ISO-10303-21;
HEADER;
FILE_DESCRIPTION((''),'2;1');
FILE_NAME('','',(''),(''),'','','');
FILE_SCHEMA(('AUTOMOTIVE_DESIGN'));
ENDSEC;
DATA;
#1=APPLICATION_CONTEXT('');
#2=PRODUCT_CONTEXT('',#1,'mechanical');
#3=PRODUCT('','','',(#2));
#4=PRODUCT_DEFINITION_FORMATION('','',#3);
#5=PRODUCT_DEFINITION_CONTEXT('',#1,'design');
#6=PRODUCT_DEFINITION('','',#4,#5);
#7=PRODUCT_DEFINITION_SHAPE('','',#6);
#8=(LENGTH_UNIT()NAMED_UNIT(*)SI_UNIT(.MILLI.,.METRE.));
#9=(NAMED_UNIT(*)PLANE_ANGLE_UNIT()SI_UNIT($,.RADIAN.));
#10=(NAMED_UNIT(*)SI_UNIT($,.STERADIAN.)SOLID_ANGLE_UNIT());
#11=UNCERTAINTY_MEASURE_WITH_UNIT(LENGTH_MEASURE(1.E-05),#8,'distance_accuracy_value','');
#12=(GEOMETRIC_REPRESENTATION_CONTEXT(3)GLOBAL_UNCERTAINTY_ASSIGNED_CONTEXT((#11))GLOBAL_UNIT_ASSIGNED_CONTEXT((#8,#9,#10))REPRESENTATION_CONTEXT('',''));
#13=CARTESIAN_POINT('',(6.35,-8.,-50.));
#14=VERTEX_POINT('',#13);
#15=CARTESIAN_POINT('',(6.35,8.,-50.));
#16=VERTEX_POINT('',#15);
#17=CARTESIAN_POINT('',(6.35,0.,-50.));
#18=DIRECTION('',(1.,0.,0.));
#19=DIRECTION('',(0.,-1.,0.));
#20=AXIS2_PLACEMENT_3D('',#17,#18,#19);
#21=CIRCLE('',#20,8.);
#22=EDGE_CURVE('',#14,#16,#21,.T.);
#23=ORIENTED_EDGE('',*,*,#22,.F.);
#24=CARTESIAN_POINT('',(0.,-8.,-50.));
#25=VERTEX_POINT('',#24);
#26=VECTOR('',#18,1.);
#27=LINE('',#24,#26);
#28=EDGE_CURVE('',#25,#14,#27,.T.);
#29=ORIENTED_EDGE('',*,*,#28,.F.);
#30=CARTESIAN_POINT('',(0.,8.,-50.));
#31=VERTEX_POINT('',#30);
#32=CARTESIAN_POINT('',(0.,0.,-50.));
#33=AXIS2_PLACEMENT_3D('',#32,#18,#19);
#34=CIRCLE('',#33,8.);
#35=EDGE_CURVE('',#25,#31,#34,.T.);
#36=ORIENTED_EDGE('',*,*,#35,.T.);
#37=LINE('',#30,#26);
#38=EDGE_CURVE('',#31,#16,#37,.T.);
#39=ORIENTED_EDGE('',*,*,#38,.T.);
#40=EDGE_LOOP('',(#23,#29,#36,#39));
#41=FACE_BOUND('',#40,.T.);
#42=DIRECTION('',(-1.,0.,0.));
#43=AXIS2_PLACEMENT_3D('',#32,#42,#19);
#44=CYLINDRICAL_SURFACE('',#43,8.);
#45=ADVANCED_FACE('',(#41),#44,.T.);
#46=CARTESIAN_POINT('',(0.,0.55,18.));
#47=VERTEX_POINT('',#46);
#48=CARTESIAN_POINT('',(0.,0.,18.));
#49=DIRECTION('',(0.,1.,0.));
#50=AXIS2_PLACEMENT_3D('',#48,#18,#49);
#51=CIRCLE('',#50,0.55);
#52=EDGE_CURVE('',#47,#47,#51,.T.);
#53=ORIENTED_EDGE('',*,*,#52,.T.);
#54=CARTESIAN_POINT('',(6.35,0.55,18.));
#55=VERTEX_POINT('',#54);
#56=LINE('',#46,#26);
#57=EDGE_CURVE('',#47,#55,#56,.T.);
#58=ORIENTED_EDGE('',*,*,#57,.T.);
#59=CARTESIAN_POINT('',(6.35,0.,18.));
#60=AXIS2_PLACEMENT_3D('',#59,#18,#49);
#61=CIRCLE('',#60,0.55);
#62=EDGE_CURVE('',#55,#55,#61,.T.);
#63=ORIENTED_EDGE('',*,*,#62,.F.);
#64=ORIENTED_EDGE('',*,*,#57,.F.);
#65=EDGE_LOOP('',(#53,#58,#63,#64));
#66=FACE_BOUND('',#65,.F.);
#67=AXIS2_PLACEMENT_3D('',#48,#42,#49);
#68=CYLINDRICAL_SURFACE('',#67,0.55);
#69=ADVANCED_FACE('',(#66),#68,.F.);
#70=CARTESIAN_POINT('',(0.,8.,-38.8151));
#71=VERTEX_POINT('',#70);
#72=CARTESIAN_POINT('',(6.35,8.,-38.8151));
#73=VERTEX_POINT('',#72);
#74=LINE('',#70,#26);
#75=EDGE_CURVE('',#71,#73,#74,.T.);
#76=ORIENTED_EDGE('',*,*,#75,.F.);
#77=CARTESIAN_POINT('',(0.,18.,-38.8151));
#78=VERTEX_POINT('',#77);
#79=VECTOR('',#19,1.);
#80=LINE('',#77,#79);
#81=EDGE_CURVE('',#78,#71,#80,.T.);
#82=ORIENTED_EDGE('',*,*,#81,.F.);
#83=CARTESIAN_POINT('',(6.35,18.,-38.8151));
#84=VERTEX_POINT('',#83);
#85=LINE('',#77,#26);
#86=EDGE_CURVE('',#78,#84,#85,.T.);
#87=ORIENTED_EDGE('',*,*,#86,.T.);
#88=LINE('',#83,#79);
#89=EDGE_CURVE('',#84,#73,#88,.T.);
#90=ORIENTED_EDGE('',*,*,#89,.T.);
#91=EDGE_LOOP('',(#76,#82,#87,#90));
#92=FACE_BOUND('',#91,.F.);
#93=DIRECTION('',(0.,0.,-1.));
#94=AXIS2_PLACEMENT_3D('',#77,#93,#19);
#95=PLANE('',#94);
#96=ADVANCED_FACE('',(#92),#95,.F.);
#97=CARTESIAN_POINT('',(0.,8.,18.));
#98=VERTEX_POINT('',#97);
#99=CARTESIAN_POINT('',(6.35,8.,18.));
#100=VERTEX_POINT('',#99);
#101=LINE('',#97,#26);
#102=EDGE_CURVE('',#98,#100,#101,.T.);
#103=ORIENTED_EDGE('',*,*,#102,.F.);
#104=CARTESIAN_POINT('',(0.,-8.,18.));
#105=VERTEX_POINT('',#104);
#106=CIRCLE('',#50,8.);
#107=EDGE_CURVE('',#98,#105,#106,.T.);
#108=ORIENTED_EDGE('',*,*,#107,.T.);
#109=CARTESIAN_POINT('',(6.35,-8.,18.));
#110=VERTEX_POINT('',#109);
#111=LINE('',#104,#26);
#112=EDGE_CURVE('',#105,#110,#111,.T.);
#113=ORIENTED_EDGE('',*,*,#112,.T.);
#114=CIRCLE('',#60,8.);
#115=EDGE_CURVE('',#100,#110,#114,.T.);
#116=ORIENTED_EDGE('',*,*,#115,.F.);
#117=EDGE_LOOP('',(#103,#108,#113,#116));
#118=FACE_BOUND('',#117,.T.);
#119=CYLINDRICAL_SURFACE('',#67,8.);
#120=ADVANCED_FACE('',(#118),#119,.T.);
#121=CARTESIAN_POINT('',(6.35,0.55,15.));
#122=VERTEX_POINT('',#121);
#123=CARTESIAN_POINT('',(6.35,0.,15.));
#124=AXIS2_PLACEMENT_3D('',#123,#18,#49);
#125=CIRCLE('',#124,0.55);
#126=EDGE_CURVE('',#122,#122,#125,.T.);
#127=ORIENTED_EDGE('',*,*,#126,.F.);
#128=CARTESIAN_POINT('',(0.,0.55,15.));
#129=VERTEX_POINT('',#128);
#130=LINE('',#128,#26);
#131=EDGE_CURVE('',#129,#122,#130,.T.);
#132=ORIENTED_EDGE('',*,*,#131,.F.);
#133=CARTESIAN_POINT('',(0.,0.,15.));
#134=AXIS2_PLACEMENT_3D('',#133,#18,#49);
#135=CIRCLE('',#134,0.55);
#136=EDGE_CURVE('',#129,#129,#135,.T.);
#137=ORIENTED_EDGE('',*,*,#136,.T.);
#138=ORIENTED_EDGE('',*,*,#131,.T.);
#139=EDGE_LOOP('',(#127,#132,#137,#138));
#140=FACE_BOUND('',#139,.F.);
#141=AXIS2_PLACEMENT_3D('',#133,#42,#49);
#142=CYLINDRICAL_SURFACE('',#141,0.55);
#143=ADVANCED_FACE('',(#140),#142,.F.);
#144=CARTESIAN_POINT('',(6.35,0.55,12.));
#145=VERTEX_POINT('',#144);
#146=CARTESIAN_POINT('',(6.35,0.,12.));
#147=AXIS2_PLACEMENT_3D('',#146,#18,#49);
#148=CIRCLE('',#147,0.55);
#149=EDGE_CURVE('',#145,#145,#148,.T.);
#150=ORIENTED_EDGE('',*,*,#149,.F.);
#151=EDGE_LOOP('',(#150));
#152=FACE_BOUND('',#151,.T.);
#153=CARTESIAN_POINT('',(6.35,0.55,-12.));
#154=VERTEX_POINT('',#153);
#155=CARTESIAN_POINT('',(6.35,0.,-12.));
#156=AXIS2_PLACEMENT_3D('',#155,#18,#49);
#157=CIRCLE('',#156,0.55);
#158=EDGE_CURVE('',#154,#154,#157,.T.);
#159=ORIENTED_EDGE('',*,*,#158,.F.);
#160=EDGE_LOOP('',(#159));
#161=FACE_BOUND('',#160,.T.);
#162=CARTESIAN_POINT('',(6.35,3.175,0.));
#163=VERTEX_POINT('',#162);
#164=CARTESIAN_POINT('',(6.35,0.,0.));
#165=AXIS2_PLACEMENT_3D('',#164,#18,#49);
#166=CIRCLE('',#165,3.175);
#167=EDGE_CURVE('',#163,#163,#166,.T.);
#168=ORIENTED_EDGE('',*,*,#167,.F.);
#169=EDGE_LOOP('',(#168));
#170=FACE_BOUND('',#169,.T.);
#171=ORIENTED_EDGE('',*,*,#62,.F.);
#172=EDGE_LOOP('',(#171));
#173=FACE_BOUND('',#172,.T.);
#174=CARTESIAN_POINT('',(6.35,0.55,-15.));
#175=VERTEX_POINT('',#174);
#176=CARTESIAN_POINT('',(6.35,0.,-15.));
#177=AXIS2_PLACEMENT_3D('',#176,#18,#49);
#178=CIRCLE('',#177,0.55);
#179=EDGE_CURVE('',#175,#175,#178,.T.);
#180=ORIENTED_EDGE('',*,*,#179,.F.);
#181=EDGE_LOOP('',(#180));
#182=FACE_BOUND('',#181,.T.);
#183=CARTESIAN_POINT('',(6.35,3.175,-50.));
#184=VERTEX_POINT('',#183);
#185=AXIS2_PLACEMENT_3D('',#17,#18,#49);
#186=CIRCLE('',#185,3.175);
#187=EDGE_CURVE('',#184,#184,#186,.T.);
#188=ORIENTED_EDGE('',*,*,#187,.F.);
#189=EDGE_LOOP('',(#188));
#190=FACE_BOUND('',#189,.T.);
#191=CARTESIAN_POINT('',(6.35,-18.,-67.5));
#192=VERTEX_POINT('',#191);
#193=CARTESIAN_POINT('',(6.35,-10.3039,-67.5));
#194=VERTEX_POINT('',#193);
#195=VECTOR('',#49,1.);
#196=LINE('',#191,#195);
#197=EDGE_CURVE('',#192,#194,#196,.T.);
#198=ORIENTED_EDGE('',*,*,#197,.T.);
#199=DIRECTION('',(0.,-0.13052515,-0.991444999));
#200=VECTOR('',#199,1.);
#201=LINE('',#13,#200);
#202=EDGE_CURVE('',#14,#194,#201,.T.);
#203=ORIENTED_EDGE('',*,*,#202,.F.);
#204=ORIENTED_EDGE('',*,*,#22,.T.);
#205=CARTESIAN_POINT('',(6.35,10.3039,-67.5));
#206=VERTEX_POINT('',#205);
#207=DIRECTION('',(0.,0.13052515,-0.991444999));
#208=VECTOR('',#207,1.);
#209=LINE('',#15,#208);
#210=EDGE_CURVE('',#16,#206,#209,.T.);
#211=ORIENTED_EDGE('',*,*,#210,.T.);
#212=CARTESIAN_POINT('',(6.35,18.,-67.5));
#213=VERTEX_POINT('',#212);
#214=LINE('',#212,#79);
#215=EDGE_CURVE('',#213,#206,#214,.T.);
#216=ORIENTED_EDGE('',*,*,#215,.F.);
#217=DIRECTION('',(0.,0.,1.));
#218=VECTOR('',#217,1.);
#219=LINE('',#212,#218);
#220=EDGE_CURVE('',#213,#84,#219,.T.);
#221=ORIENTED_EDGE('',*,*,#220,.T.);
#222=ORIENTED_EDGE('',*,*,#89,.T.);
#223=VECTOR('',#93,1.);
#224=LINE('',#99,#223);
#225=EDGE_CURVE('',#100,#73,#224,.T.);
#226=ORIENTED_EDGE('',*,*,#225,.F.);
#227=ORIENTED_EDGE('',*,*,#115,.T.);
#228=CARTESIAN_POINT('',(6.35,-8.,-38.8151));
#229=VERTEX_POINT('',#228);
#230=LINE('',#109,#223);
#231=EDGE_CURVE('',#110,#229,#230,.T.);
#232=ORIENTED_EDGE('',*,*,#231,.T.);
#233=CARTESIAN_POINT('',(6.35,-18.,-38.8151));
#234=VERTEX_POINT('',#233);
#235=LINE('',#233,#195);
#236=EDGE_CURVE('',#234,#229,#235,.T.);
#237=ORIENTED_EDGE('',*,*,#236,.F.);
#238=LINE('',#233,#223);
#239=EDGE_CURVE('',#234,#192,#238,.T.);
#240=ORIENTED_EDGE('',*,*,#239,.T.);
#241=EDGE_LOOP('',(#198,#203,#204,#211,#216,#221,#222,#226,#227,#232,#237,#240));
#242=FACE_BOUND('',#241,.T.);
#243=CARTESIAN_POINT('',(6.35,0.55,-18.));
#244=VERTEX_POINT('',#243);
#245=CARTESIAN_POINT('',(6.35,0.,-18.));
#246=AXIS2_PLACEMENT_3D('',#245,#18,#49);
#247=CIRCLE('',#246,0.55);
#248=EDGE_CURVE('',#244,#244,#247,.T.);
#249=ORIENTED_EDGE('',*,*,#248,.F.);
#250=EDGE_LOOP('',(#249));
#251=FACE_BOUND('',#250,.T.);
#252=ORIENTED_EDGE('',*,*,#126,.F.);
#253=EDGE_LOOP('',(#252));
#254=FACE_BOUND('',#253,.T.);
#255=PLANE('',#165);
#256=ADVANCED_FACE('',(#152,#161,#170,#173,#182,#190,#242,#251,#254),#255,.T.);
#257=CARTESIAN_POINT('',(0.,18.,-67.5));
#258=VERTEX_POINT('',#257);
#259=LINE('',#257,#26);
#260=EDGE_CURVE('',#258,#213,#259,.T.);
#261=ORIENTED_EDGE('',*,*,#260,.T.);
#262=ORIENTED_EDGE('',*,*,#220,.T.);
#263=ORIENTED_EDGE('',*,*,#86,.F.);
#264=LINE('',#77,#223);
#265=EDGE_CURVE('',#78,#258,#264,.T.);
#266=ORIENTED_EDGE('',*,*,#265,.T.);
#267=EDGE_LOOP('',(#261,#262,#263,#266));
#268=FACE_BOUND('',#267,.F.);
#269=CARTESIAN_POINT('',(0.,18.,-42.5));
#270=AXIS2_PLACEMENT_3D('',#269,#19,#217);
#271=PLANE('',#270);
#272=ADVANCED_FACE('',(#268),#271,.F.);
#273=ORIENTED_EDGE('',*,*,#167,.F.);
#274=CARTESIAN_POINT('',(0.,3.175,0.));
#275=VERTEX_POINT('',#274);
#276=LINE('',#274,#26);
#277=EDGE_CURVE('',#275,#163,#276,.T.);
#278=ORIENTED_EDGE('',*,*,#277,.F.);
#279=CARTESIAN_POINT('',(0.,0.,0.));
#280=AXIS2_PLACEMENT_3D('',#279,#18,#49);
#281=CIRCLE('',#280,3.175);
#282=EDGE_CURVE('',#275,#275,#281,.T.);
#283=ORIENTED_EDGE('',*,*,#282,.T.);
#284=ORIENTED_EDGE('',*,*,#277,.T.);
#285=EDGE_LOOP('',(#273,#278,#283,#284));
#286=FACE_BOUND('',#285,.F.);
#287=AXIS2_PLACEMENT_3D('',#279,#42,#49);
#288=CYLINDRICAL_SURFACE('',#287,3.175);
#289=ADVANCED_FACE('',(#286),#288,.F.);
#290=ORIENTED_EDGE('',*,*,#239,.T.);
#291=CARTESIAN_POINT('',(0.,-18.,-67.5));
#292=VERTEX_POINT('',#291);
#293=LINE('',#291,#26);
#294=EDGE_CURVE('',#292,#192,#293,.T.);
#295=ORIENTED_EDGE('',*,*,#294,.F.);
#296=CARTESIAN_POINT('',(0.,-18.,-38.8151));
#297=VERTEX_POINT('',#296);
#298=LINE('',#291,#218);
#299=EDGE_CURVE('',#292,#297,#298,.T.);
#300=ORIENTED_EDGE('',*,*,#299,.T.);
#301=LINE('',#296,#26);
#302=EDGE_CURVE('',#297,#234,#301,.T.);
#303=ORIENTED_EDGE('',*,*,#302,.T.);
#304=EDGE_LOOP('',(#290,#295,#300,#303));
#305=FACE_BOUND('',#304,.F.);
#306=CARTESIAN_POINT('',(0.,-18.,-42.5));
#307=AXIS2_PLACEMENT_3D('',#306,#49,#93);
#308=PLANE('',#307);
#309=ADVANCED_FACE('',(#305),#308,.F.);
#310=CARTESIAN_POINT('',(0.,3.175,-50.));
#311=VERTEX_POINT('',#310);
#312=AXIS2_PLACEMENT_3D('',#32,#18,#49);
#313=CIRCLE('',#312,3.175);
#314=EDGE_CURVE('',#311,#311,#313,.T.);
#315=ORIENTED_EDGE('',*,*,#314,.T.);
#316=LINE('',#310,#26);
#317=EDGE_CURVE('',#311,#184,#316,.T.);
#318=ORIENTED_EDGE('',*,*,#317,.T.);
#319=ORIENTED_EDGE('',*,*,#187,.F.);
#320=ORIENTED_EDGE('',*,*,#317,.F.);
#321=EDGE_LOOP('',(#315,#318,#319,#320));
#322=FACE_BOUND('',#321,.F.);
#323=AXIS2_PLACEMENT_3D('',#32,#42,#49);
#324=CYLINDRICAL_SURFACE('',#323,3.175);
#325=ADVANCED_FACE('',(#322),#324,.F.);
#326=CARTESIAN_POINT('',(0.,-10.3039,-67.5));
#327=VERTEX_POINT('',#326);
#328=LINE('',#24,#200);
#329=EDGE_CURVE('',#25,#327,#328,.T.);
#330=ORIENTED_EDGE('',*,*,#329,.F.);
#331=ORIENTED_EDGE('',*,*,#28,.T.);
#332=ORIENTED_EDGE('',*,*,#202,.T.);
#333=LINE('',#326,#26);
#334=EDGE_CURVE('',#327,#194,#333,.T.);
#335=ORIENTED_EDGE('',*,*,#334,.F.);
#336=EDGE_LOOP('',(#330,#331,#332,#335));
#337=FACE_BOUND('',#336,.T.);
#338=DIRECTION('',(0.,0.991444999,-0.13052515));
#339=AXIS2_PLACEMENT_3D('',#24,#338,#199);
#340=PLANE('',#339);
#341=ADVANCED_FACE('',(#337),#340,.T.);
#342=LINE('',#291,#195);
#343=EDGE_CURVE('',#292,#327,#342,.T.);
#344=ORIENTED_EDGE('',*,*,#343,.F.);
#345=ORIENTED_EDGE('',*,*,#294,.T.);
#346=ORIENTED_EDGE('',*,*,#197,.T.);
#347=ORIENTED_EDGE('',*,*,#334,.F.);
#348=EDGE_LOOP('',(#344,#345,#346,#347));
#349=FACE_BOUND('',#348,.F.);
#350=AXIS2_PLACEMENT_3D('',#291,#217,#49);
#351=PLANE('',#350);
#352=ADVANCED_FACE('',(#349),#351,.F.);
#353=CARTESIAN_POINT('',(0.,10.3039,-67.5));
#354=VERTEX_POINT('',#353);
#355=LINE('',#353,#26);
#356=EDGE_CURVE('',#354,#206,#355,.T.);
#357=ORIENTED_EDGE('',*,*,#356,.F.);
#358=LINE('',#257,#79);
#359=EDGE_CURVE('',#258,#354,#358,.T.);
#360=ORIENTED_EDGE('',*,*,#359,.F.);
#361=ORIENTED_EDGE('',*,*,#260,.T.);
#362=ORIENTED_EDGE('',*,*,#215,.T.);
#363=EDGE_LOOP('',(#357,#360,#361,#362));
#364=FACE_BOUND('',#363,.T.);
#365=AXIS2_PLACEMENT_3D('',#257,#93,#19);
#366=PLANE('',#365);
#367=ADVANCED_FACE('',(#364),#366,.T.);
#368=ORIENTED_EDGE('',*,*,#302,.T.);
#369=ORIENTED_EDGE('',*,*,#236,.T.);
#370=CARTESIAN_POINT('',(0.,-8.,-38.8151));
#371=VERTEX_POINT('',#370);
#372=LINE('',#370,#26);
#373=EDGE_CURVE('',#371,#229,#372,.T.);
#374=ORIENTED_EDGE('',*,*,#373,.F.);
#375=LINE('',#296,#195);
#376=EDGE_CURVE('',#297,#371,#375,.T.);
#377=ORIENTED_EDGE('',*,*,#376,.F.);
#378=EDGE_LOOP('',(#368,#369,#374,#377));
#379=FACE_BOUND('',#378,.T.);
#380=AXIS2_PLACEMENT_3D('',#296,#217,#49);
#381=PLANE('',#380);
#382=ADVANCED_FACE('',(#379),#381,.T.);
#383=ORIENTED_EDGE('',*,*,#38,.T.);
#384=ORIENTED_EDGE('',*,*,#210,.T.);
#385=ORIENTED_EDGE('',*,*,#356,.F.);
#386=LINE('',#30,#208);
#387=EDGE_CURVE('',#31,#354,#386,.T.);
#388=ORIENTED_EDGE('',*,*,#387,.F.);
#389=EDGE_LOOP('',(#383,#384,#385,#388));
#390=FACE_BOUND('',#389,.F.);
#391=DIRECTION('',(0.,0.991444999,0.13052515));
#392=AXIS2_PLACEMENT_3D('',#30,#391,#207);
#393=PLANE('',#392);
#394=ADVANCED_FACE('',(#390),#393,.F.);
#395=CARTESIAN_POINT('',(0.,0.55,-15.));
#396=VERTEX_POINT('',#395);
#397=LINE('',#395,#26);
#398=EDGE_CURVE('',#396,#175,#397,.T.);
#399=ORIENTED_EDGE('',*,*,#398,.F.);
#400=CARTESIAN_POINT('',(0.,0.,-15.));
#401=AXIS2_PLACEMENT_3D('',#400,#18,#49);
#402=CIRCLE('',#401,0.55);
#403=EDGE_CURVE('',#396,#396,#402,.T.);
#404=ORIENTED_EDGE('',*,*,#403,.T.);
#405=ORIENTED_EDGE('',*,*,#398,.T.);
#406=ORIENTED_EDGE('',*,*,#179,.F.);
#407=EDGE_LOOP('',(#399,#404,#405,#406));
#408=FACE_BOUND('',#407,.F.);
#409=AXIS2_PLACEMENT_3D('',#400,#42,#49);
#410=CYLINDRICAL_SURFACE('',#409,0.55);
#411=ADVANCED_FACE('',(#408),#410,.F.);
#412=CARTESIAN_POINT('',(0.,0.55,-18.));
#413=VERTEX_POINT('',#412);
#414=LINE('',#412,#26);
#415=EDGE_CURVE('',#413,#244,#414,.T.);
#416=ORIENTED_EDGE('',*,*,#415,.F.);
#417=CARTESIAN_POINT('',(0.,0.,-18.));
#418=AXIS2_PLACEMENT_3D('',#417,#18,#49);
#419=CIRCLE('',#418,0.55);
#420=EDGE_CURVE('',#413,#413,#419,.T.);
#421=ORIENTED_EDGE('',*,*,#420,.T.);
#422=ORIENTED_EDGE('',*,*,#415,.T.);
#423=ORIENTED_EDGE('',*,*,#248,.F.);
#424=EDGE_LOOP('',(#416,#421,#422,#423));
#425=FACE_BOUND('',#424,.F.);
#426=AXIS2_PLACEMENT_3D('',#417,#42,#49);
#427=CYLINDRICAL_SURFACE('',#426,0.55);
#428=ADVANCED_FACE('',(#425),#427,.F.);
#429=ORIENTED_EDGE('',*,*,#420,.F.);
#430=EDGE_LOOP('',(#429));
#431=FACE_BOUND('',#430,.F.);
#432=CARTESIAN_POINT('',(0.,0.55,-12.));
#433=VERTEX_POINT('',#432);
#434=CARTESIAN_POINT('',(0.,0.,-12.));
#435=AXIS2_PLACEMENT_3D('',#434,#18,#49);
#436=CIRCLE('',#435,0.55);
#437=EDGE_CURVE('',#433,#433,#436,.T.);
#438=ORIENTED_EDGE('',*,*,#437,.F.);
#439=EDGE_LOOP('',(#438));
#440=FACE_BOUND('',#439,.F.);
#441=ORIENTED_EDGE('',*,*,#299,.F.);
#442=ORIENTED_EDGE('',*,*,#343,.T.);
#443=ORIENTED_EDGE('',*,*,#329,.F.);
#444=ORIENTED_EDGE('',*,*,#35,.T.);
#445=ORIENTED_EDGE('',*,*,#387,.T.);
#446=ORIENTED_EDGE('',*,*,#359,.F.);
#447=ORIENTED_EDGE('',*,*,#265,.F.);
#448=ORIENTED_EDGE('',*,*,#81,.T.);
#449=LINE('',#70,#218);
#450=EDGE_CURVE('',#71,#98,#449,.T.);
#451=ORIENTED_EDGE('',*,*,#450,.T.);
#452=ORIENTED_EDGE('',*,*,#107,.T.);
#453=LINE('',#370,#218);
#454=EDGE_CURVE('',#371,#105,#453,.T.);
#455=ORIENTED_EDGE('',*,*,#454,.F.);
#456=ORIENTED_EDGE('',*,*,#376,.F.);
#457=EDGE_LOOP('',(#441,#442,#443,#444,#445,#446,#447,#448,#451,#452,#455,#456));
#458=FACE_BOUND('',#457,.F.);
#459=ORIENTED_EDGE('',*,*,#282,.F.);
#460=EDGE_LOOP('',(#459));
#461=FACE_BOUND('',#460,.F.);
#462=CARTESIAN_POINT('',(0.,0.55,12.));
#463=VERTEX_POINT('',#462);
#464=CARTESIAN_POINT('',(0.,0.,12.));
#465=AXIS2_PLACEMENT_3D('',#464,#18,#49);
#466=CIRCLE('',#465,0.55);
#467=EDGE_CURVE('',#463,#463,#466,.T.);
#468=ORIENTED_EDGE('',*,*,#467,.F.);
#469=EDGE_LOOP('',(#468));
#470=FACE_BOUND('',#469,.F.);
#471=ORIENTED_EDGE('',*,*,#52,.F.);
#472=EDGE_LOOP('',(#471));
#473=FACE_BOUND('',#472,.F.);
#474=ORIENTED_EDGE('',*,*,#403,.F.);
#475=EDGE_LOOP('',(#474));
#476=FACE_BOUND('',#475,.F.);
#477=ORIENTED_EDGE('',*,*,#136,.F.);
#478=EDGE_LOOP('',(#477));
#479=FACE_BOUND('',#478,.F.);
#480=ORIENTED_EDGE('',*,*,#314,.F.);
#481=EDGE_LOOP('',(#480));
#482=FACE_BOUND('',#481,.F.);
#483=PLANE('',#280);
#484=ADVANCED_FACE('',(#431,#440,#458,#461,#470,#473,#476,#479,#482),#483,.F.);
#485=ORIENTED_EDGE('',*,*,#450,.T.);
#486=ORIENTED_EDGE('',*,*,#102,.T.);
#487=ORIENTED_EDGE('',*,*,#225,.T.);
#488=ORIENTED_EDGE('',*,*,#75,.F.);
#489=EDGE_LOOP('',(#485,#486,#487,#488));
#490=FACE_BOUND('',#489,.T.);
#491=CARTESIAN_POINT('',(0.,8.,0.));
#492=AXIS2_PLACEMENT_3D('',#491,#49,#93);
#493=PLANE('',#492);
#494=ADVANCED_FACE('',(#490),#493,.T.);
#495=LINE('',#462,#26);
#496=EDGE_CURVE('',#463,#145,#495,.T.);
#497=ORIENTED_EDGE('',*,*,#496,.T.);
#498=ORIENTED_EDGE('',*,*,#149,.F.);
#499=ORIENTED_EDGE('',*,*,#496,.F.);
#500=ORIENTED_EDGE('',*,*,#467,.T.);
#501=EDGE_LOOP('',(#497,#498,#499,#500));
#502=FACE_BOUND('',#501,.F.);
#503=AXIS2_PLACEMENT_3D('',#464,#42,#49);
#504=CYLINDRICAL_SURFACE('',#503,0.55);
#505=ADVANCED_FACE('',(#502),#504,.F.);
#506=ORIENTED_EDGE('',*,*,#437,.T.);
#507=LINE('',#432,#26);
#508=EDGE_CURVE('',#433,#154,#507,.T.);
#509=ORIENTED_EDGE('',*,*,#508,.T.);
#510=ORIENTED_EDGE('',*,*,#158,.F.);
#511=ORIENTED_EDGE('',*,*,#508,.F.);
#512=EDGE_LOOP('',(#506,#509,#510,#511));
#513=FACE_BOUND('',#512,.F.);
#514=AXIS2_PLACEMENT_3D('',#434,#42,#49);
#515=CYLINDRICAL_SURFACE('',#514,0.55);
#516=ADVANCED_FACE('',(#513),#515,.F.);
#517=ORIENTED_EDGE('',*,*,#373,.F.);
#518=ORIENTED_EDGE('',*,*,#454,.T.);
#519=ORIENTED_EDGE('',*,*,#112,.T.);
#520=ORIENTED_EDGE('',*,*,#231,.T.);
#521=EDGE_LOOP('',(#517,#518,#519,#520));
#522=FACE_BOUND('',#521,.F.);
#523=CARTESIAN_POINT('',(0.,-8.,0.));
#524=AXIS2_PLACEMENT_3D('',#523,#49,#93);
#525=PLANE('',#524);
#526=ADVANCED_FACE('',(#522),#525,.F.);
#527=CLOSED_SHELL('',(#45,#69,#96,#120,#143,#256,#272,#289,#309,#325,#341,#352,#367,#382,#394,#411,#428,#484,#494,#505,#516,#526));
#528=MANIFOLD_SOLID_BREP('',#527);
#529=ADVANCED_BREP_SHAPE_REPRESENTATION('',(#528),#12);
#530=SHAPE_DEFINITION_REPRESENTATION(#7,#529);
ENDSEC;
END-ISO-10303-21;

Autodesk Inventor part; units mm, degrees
ref_plane "YZ Plane" through (0, 0, 0) normal (1, 0, 0) x (0, 1, 0)
ref_plane "XZ Plane" through (0, 0, 0) normal (0, 1, 0) x (-1, 0, 0)
ref_plane "XY Plane" through (0, 0, 0) normal (0, 0, 1) x (1, 0, 0)
sketch "Block1" plane through (0, 0, 0) normal (0, 0, 1) x (1, 0, 0)
  circle A0 centre (-34.5082, -40.3774) radius 0.55
  circle A1 centre (-31.5082, -40.3774) radius 0.55
  circle A2 centre (-28.5082, -40.3774) radius 0.55
  point P0 (-31.5082, -40.3774)
  dimension "d7" = 1.1
  dimension "d8" = 1.1
  dimension "d9" = 1.1
sketch "Sketch1" plane through (0, 0, 0) normal (1, 0, 0) x (0, 1, 0)
  circle A0 centre (0, 0) radius 3.175
  line L0 (8, 0) -> (8, -50)
  line L1 (-8, 0) -> (-8, -50)
  arc A1 (-8, -50) -> (8, -50) centre (0, -50) ccw
  circle A2 centre (0, -50) radius 3.175
  line L2 (0, -86.2) -> (0, 44.7) construction
  line L3 (8, 0) -> (-8, 0) construction
  line L4 (8, 0) -> (8, 18)
  line L5 (-8, 0) -> (-8, 18)
  arc A3 (8, 18) -> (-8, 18) centre (0, 18) ccw
  line L6 (-25.2, 0) -> (25.2, 0) construction
  line L7 (-8, -42.5) -> (-18, -42.5)
  line L8 (-18, -42.5) -> (-18, -67.5)
  line L9 (-18, -67.5) -> (-8, -67.5)
  line L10 (-8, -67.5) -> (-8, -42.5)
  line L11 (-8, -42.5) -> (17.0955, -42.5) construction
  line L12 (-8, -50) -> (-18, -50)
  line L13 (-18, -50) -> (-18, -38.8151)
  line L14 (-18, -38.8151) -> (-8, -38.8151)
  line L15 (-8, -38.8151) -> (-8, -50)
  line L16 (-8, -50) -> (-10.3039, -67.5)
  line L17 (-8, -50) -> (9.651, -50) construction
  line L18 (8, -42.5) -> (18, -42.5)
  line L19 (18, -42.5) -> (18, -67.5)
  line L20 (18, -67.5) -> (8, -67.5)
  line L21 (8, -67.5) -> (8, -42.5)
  line L22 (8, -50) -> (18, -50)
  line L23 (18, -50) -> (18, -38.8151)
  line L24 (18, -38.8151) -> (8, -38.8151)
  line L25 (8, -38.8151) -> (8, -50)
  line L26 (8, -50) -> (10.3039, -67.5)
  circle A4 centre (0, -12) radius 0.55
  circle A5 centre (0, -15) radius 0.55
  circle A6 centre (0, -18) radius 0.55
  circle A7 centre (0, 12) radius 0.55
  circle A8 centre (0, 15) radius 0.55
  circle A9 centre (0, 18) radius 0.55
  point P0 (0, 0)
  point P1 (-8, -25)
  dimension "d0" = 6.35
  dimension "d2" = 16
  dimension "d4" = 6.35
  dimension "d11" = 12
  dimension "d12" = 50
  dimension "d16" = 10
  dimension "d17" = 25
  dimension "d18" = 42.5
  dimension "d20" = 10
  dimension "d21" = 97.5
extrude "Extrusion1" add sketch "Sketch1" along normal blind 6.35 contours L0 A1 L1 L5 A3 L4 | L24 L23 L18 L0 | L18 L19 L22 L0 | L22 L19 L20 L26 | L12 L8 L7 L1 | L16 L9 L8 L12 | L1 L7 L13 L14
equation "\"d7\" = d9"
equation "\"d8\" = d9"
properties part number "Crank Skiba"
